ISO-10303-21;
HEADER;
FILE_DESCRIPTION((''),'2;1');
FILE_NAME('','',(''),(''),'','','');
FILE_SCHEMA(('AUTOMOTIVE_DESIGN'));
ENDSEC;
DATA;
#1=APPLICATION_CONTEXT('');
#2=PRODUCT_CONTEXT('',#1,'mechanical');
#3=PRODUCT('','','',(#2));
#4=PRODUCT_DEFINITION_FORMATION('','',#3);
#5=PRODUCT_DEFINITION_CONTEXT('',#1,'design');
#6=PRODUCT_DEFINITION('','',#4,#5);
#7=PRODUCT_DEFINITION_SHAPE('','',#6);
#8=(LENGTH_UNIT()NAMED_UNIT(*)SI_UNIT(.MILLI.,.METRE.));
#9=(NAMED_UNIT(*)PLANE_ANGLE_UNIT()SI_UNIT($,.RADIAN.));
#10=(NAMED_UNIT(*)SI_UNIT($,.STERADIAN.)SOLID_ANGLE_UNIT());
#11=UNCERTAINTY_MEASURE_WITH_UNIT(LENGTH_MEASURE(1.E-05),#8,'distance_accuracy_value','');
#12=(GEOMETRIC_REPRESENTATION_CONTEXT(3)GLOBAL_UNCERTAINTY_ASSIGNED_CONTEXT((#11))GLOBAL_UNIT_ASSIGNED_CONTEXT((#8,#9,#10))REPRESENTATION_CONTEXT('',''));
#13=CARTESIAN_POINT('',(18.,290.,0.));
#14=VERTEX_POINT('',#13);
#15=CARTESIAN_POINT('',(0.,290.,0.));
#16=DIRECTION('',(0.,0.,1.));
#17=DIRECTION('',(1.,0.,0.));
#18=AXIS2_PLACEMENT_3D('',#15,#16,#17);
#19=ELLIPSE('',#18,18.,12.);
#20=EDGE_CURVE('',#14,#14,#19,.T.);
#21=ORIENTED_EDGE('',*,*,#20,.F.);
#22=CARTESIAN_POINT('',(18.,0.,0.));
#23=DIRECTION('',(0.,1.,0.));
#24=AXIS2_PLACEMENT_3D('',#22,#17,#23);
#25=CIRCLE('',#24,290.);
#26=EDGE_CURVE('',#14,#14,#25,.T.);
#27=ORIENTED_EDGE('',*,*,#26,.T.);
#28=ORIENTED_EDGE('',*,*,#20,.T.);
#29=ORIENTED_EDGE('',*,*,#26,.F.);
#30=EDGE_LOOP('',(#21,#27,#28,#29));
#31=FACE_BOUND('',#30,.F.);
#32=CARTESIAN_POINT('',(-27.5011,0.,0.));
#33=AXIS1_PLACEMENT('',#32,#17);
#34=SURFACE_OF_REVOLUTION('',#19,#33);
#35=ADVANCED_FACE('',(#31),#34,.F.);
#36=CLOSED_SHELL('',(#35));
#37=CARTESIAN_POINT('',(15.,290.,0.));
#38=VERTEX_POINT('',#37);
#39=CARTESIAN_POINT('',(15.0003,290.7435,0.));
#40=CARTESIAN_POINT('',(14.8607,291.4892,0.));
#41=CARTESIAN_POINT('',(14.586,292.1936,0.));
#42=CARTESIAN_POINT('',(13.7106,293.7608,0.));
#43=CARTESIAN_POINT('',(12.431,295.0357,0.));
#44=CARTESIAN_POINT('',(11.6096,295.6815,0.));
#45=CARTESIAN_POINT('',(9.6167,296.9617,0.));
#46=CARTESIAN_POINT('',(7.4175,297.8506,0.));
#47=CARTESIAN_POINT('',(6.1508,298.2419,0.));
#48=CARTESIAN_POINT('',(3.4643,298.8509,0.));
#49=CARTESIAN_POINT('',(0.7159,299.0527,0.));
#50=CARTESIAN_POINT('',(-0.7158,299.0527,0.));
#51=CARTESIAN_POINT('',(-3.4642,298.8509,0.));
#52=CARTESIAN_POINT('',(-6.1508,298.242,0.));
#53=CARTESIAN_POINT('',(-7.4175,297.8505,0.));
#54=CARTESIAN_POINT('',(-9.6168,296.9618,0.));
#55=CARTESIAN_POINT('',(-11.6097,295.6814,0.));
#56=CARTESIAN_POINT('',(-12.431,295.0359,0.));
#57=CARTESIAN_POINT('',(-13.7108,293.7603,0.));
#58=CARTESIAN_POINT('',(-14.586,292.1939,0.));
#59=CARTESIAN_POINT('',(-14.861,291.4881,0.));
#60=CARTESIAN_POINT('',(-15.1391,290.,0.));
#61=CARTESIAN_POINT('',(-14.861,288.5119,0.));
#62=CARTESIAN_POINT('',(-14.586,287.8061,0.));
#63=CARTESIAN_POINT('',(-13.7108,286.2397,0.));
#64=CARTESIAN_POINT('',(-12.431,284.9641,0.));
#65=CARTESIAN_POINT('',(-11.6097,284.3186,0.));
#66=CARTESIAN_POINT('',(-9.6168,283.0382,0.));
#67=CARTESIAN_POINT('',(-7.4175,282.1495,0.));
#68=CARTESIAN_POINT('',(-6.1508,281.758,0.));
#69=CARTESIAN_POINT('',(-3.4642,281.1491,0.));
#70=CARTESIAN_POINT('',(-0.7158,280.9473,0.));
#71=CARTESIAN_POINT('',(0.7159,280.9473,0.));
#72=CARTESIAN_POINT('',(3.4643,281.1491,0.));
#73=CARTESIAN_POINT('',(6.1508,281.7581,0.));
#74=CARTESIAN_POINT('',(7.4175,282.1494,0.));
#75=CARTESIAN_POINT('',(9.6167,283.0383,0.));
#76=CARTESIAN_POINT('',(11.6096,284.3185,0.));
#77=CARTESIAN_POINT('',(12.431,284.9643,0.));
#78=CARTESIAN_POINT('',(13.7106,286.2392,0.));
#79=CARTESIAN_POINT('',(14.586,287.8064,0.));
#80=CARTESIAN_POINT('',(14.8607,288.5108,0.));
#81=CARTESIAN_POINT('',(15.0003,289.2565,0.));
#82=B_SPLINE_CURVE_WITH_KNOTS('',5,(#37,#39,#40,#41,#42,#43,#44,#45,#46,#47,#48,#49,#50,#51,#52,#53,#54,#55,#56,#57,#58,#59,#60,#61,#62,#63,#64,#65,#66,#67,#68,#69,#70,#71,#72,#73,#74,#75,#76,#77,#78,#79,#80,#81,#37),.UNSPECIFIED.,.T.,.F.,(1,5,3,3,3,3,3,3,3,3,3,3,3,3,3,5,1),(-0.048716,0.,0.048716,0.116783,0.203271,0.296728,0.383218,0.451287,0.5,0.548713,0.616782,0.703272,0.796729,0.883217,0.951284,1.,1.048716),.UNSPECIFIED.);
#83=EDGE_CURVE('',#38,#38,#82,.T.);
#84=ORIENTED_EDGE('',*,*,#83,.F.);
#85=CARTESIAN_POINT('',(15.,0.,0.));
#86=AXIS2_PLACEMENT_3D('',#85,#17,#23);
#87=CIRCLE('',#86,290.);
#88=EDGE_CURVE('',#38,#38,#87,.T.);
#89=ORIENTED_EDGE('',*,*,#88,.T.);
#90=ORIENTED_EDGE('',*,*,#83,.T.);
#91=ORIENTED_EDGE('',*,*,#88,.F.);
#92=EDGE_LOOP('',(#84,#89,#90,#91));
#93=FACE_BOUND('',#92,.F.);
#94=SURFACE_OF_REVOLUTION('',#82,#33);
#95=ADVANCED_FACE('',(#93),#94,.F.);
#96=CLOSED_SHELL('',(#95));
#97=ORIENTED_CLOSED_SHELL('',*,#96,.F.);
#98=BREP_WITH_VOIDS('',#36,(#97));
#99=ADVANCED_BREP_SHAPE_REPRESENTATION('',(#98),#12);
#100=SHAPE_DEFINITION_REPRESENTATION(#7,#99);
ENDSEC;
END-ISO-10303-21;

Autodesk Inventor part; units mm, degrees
ref_plane "YZ Plane" through (0, 0, 0) normal (1, 0, 0) x (0, 1, 0)
ref_plane "XZ Plane" through (0, 0, 0) normal (0, 1, 0) x (-1, 0, 0)
ref_plane "XY Plane" through (0, 0, 0) normal (0, 0, 1) x (1, 0, 0)
sketch "Boceto1" plane through (0, 0, 0) normal (0, 0, 1) x (1, 0, 0)
  spline S0 degree 4 poles (-24.9404, 274.1789) (-12.6331, 270.0547) (0, 268.534) (12.6331, 270.0547) (24.9404, 274.1789) knots 0 0 0 0 0 1 1 1 1 1
  line L0 (-27.5011, 282.6709) -> (-27.5011, 0)
  line L1 (27.5011, 0) -> (27.5011, 282.6709)
  ellipse E0 centre (0, 290) end of major axis (18, 290) minor radius 12
  line L2 (-27.5011, 0) -> (27.5011, 0)
  spline S1 degree 5 poles (15, 290) (15.0003, 290.7435) (14.8607, 291.4892) (14.586, 292.1936) (13.7106, 293.7608) (12.431, 295.0357) (11.6096, 295.6815) (9.6167, 296.9617) (7.4175, 297.8506) (6.1508, 298.2419) (3.4643, 298.8509) (0.7159, 299.0527) (-0.7158, 299.0527) (-3.4642, 298.8509) (-6.1508, 298.242) (-7.4175, 297.8505) (-9.6168, 296.9618) (-11.6097, 295.6814) (-12.431, 295.0359) (-13.7108, 293.7603) (-14.586, 292.1939) (-14.861, 291.4881) (-15.1391, 290) (-14.861, 288.5119) (-14.586, 287.8061) (-13.7108, 286.2397) (-12.431, 284.9641) (-11.6097, 284.3186) (-9.6168, 283.0382) (-7.4175, 282.1495) (-6.1508, 281.758) (-3.4642, 281.1491) (-0.7158, 280.9473) (0.7159, 280.9473) (3.4643, 281.1491) (6.1508, 281.7581) (7.4175, 282.1494) (9.6167, 283.0383) (11.6096, 284.3185) (12.431, 284.9643) (13.7106, 286.2392) (14.586, 287.8064) (14.8607, 288.5108) (15.0003, 289.2565) (15, 290) knots 0 0 0 0 0 0 0.048716 0.048716 0.048716 0.116783 0.116783 0.116783 0.203271 0.203271 0.203271 0.296728 0.296728 0.296728 0.383218 0.383218 0.383218 0.451287 0.451287 0.451287 0.5 0.5 0.5 0.548713 0.548713 0.548713 0.616782 0.616782 0.616782 0.703272 0.703272 0.703272 0.796729 0.796729 0.796729 0.883217 0.883217 0.883217 0.951284 0.951284 0.951284 1 1 1 1 1 1
  point P0 (0, 0)
  point P1 (-12.4232, 271.0369)
  point P2 (0, 270)
  point P3 (12.4232, 271.0369)
  dimension "d0" = 18
  dimension "d1" = 12
  dimension "d2" = 290
  dimension "d4" = 3
revolve "Revolución1" add sketch "Boceto1" angle 360 about axis through (-27.5011, 0, 0) along (1, 0, 0)
properties part number "neumatico"
